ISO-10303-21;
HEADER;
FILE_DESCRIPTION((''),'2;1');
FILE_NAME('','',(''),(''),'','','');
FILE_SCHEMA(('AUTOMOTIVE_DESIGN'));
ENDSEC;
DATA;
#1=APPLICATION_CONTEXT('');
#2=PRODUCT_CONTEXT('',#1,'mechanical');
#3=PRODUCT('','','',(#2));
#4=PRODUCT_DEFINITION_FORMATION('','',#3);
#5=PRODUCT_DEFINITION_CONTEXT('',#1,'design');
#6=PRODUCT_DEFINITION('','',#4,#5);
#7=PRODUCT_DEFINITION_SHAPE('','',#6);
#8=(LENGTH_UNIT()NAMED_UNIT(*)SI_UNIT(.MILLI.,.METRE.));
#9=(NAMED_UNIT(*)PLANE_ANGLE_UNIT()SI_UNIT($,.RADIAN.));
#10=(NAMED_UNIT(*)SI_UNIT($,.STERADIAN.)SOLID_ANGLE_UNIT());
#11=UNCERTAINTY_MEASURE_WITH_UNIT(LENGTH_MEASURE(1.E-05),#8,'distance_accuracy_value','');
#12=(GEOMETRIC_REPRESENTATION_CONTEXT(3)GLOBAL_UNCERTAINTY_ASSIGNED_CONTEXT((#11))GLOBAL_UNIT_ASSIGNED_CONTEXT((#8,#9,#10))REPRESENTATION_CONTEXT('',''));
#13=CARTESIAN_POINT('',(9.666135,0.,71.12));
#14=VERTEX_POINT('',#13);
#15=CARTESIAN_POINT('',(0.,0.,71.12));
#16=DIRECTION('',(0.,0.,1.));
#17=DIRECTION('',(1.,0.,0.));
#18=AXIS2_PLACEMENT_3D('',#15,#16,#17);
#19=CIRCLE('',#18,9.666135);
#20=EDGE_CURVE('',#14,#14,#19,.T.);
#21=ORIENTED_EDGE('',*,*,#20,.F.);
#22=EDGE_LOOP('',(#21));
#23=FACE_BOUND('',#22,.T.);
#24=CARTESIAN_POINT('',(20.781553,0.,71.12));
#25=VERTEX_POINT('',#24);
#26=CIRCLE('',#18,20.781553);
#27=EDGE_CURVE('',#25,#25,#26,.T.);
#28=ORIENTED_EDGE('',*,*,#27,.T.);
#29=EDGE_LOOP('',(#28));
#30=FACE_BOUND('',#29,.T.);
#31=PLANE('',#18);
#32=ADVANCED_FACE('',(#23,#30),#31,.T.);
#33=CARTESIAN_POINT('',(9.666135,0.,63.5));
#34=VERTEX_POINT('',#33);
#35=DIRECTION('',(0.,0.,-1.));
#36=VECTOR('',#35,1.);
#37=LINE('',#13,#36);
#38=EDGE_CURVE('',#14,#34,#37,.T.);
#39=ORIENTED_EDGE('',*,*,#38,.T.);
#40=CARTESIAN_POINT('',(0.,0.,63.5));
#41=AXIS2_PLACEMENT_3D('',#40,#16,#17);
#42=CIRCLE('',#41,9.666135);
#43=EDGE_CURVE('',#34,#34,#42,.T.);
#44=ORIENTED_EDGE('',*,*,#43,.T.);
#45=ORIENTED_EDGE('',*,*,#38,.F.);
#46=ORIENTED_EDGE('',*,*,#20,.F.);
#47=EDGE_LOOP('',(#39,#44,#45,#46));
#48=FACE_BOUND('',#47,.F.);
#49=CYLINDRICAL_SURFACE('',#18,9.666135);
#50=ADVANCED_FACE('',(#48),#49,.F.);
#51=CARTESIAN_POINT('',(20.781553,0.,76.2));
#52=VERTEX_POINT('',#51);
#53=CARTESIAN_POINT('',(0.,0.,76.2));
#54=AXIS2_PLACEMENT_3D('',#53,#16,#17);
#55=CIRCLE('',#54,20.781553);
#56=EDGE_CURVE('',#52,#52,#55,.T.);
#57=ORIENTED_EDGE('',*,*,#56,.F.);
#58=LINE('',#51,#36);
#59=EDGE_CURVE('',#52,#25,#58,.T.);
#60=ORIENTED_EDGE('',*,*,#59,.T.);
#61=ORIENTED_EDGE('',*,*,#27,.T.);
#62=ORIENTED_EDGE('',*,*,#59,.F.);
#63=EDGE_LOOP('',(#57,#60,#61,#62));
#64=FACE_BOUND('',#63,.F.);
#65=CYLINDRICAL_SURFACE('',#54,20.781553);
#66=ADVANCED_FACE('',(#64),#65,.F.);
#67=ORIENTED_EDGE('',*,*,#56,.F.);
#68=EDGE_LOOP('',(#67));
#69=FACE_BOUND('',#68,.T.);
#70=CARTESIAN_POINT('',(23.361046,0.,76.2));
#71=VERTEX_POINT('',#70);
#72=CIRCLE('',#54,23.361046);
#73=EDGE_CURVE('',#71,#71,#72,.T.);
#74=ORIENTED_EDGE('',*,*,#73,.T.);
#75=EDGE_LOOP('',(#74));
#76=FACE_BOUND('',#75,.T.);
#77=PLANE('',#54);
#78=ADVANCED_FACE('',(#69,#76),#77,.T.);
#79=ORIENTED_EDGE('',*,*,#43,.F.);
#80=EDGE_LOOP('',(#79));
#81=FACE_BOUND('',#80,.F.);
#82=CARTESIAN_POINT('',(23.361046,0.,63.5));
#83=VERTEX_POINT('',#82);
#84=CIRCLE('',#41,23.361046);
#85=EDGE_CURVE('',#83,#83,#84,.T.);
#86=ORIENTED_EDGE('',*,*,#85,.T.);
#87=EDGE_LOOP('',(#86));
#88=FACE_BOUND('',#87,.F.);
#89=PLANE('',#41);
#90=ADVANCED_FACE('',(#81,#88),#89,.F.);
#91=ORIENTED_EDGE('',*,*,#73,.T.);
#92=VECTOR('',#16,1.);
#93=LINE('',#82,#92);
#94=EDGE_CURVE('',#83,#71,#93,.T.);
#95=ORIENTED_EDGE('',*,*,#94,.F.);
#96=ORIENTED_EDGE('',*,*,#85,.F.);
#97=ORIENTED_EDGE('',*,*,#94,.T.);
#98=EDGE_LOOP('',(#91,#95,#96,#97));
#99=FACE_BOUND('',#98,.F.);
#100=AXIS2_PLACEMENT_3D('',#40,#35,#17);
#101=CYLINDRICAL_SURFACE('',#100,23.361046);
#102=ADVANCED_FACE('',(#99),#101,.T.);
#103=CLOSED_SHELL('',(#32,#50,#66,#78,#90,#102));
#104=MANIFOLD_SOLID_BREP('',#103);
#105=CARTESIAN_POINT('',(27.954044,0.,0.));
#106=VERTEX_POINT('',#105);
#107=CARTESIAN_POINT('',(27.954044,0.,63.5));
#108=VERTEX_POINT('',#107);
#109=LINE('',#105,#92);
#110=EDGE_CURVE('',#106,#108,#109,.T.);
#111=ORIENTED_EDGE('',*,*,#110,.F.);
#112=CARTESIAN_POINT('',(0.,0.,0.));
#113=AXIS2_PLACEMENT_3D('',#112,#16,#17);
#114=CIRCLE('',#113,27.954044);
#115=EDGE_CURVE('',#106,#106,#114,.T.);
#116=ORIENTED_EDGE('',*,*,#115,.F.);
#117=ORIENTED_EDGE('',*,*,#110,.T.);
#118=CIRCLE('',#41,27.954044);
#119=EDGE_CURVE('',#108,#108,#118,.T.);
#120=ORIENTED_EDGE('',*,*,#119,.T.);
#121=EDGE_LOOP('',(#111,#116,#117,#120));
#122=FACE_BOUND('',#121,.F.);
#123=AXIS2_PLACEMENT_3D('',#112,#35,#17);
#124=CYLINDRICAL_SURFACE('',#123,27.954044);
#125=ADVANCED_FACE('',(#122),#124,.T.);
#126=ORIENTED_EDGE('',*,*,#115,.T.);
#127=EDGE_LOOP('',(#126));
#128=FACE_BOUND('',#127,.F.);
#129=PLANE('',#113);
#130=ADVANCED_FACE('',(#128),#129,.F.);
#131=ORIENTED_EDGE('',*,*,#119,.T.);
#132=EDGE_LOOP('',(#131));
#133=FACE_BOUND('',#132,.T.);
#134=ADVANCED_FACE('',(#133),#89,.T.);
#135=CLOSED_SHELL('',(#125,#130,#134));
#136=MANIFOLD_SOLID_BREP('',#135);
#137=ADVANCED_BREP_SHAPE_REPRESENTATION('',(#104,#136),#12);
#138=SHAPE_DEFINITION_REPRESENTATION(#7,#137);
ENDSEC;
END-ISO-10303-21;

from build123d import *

# Parameters (mm, degrees)
F0_R     = 27.9540439908
F1_DEPTH = 63.5
F2_R     = 23.3610455133
F3_DEPTH = 12.7
F4_R     = 20.7815529946
F5_DEPTH = 5.08
F6_R     = 9.6661345216
F7_DEPTH = 12.7


with BuildPart() as f1:
    # F0 (on Top) → F1 (new body)
    with BuildSketch(Plane.XY):
        Circle(F0_R)
    extrude(amount=F1_DEPTH)


with BuildPart() as f3:
    # F2 (on face) → F3 (new body)
    with BuildSketch(Plane.XY.offset(63.5)):
        Circle(F2_R)
    extrude(amount=F3_DEPTH)

    # F4 (on face) → F5 (cut)
    with BuildSketch(Plane.XY.offset(76.2)):
        Circle(F4_R)
    extrude(amount=-F5_DEPTH, mode=Mode.SUBTRACT)

    # F6 (on face) → F7 (cut)
    with BuildSketch(Plane.XY.offset(71.12)):
        Circle(F6_R)
    extrude(amount=-F7_DEPTH, mode=Mode.SUBTRACT)


solid = Compound([f1.part, f3.part])
